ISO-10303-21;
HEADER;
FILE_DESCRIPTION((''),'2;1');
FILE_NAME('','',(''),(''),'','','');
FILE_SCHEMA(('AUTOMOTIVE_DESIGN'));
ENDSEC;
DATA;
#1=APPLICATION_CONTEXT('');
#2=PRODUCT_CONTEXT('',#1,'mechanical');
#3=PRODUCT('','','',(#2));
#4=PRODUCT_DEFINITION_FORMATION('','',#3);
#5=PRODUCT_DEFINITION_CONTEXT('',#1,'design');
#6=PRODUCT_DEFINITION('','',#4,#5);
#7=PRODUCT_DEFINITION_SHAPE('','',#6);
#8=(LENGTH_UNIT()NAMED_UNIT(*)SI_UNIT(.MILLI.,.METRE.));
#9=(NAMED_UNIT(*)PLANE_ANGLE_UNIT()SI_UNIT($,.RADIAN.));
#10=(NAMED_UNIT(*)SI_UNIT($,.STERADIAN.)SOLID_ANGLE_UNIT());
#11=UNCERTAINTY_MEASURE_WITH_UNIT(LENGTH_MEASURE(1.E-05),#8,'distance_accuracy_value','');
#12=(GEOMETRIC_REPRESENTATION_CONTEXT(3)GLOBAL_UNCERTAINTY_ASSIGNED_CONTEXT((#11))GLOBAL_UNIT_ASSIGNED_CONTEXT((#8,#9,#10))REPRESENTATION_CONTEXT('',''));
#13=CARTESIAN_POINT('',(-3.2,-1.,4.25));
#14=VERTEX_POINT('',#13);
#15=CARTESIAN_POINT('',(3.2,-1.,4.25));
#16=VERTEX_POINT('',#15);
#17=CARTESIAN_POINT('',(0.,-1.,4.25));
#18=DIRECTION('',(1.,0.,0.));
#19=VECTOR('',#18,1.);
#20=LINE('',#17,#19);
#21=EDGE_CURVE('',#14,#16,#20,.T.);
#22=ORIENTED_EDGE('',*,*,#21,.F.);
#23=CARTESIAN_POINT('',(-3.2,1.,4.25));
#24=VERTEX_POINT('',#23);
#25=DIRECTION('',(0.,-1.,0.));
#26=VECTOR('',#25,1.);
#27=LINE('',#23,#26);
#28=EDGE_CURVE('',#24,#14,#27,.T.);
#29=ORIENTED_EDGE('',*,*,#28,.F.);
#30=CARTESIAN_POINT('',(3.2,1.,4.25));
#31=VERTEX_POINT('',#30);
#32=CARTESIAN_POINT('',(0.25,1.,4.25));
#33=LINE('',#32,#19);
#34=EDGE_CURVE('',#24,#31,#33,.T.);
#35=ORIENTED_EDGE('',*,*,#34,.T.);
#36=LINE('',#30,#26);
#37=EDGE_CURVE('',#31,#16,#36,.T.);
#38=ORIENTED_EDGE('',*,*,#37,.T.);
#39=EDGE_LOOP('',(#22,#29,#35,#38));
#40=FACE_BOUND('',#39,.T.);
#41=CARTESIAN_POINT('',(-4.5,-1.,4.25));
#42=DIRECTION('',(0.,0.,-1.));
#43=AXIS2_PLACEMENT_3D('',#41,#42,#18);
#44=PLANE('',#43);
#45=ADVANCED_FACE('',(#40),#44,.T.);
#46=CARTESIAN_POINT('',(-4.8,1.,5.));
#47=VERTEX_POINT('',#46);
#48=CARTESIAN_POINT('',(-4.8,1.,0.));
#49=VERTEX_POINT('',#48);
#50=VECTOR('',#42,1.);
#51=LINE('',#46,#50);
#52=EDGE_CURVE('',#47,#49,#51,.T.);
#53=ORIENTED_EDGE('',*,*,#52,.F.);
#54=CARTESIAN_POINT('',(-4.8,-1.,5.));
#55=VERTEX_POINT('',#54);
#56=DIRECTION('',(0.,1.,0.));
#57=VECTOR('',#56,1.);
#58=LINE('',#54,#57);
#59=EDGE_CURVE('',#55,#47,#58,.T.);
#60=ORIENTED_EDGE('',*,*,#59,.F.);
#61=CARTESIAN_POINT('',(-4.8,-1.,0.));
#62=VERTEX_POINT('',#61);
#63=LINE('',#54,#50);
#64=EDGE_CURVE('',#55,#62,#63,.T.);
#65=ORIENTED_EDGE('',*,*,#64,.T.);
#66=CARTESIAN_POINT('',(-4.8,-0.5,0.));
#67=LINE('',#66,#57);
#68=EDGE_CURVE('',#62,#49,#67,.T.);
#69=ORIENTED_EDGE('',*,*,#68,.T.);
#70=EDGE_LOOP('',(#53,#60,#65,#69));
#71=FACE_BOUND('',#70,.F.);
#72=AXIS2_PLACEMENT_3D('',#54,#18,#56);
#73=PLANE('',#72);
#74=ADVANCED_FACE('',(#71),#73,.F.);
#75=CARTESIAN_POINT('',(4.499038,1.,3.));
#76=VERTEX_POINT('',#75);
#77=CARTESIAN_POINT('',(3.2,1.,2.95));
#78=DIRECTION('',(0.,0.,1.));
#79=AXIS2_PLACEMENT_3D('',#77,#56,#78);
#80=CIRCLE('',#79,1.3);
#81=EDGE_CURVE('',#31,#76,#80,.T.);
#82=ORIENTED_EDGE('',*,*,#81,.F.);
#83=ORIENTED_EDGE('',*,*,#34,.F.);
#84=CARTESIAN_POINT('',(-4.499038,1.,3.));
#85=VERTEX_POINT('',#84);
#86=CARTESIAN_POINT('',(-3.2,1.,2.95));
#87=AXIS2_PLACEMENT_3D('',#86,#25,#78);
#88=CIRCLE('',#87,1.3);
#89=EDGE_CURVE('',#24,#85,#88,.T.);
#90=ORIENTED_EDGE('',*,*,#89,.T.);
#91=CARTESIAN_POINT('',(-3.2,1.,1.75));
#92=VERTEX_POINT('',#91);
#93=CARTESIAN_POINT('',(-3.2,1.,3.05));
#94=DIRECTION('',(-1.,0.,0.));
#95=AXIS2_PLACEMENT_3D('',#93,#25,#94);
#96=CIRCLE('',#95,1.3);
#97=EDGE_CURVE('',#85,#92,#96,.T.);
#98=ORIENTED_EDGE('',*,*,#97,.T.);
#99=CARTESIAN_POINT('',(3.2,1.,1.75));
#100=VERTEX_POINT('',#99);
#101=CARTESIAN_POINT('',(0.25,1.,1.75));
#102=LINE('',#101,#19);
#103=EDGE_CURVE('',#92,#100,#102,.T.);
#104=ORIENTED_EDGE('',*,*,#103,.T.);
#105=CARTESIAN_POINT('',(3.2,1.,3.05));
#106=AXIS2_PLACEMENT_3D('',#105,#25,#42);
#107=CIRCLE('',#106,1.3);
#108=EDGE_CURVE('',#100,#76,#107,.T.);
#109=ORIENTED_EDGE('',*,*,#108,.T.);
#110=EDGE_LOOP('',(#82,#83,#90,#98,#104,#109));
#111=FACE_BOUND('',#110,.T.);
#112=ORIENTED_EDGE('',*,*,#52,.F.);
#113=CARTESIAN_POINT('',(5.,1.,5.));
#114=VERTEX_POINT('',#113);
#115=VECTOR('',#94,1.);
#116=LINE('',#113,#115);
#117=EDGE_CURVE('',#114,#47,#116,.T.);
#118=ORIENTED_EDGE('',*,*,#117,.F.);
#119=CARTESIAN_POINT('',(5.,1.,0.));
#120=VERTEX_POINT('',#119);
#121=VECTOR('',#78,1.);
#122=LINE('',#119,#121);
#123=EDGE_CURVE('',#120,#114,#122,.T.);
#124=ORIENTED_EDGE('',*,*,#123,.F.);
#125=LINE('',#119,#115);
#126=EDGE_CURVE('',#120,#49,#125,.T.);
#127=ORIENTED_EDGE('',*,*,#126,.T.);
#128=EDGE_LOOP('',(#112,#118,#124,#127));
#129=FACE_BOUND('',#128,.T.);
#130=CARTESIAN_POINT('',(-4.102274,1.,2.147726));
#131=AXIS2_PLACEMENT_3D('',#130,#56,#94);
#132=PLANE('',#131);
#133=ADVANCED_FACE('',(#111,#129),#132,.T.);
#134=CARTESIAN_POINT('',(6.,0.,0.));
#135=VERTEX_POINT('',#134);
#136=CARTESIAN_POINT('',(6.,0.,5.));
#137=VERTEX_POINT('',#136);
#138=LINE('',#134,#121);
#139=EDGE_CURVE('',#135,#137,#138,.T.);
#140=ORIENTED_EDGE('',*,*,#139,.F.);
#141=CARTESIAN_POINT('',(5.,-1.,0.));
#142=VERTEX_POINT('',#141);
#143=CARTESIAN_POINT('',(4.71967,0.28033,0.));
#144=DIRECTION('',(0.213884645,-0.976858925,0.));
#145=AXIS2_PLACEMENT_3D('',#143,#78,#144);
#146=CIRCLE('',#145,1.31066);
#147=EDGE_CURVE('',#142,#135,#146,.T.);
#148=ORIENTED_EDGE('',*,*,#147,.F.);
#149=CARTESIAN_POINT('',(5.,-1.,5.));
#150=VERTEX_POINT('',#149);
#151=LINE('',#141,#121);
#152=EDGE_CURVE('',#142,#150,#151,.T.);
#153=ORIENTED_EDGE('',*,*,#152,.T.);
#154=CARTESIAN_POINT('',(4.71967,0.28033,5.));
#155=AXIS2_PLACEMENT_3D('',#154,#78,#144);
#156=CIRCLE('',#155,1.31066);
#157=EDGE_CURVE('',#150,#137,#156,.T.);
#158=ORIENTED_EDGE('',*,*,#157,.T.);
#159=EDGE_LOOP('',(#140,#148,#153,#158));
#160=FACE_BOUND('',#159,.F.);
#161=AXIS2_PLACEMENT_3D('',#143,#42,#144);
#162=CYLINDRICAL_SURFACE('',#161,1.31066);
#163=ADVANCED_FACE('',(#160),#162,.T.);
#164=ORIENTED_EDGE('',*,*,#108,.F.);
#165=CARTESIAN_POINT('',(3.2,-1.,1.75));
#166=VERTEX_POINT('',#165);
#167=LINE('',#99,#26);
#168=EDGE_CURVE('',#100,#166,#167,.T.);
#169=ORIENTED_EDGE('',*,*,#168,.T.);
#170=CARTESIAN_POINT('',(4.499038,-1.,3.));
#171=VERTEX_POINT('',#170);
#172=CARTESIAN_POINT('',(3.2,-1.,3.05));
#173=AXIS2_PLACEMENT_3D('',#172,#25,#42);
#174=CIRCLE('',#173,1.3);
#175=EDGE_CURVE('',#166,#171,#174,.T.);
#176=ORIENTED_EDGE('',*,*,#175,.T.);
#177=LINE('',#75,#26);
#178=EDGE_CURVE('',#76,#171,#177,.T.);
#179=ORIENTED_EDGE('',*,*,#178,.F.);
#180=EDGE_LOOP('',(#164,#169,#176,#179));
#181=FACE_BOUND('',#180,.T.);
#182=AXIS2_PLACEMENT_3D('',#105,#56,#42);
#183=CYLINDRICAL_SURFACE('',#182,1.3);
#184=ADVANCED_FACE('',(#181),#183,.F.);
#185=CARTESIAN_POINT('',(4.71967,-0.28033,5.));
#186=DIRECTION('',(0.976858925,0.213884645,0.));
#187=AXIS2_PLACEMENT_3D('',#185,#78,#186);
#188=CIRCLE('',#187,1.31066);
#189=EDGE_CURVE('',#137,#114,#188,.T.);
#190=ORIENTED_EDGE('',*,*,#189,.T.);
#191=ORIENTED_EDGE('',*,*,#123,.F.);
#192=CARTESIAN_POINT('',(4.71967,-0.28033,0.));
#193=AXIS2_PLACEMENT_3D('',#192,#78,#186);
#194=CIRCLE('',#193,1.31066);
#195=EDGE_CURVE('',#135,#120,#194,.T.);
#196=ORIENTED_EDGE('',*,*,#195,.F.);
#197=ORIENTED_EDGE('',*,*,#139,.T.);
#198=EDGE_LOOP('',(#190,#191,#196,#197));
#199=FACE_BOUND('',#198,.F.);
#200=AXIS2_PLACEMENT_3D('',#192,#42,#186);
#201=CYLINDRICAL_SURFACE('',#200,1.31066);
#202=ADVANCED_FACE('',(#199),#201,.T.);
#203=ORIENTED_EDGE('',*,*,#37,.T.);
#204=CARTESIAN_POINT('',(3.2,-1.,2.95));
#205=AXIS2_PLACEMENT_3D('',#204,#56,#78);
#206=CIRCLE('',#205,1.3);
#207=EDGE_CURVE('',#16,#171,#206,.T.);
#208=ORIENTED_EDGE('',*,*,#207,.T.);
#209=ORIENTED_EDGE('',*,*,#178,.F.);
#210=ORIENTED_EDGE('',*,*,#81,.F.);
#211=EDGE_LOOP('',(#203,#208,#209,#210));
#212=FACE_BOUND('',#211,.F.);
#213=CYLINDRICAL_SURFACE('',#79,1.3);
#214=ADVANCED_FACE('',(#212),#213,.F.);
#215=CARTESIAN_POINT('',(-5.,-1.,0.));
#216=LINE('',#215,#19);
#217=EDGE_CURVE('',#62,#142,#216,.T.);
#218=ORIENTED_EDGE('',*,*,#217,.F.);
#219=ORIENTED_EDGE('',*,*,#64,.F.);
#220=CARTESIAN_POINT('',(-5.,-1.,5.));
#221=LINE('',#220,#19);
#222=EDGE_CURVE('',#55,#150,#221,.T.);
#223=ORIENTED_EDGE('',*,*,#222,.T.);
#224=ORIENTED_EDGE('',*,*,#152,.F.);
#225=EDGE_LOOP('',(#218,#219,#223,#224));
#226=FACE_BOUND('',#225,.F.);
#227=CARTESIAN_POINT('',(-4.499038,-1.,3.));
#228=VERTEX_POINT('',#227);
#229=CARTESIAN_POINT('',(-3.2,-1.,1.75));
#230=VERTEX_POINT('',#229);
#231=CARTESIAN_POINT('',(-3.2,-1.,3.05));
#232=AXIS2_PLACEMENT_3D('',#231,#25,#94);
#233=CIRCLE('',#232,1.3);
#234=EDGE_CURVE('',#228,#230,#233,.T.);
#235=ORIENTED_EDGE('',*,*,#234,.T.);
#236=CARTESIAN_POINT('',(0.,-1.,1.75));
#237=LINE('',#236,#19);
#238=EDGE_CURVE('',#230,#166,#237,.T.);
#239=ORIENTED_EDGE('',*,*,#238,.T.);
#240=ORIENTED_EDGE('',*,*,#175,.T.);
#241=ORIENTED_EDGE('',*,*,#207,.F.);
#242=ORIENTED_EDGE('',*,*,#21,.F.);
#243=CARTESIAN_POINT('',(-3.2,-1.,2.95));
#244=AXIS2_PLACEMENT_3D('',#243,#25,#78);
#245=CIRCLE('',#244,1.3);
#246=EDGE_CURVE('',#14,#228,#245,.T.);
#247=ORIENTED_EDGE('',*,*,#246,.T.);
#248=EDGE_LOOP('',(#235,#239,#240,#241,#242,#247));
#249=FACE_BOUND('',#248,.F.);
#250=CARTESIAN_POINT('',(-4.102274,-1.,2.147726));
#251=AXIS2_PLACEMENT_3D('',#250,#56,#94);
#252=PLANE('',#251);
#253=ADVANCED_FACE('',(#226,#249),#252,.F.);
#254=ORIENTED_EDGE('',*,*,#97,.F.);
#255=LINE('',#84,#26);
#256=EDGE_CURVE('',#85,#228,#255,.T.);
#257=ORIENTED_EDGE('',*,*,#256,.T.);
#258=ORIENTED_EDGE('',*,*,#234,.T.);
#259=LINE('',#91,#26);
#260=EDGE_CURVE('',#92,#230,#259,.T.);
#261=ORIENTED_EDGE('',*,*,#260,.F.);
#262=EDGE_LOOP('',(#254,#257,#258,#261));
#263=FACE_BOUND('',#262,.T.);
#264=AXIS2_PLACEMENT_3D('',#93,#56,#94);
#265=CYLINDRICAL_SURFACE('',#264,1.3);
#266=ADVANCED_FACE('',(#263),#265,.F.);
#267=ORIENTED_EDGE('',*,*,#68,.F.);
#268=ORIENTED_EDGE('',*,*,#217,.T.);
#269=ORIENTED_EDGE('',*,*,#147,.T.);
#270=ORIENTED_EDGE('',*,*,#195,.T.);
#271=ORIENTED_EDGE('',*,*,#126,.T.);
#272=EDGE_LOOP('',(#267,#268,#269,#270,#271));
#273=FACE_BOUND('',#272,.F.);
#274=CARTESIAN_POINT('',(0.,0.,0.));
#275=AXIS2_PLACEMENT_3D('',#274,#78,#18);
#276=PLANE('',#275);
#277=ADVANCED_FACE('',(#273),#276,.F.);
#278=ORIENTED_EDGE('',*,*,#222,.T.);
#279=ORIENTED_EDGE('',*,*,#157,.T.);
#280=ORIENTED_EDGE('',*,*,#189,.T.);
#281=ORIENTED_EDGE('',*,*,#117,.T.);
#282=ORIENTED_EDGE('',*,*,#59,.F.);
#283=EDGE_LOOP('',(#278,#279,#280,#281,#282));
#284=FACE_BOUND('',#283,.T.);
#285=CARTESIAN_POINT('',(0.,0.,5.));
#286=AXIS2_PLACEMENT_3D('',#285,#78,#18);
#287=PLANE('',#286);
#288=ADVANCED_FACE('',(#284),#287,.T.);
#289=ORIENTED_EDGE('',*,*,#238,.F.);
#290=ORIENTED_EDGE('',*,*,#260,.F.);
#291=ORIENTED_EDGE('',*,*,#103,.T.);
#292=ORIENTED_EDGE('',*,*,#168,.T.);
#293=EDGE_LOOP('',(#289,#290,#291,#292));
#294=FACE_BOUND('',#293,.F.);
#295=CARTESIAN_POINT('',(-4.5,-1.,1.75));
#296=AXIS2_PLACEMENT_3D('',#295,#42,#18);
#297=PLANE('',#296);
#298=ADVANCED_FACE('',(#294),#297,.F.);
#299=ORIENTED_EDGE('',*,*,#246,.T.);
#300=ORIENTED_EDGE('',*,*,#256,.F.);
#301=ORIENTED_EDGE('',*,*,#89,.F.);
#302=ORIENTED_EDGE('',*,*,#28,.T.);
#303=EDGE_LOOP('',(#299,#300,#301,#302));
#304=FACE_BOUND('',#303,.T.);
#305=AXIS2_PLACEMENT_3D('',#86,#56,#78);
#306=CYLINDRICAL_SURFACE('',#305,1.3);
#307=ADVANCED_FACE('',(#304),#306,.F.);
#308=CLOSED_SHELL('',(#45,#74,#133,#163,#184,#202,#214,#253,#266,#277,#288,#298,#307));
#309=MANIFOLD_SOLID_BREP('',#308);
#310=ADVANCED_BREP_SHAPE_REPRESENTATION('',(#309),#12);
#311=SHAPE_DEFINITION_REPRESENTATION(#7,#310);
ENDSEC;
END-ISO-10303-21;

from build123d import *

# Parameters (mm, degrees)
F1_DEPTH    = 5
F2_W        = 9
F2_H        = 2.5
F3_DEPTH    = 2.001
F4_T1_DEPTH = 2
F6_DEPTH    = 5.001


# Not quite as in the source:
# - a fillet or chamfer that OpenCascade refuses, or shapes differently, is made with other operations: its cross-section is extruded or revolved along the edge and cut away or added


with BuildPart() as f1:
    # F0 (on Top) → F1 (new body)
    with BuildSketch(Plane.XY):
        with BuildLine():
            Line((5, 1), (-5, 1))
            ThreePointArc((-5, 1), (-5.6464466094, 0.6464466094), (-6, 0))
            ThreePointArc((-6, 0), (-5.6464466094, -0.6464466094), (-5, -1))
            Line((-5, -1), (5, -1))
            ThreePointArc((5, -1), (5.6464466094, -0.6464466094), (6, 0))
            ThreePointArc((6, 0), (5.6464466094, 0.6464466094), (5, 1))
        make_face()
    extrude(amount=F1_DEPTH)

    # F2 (on face) → F3 (cut, through all)
    with BuildSketch(Plane.XZ.offset(1)):
        with Locations((0, 3)):
            Rectangle(F2_W, F2_H)
    extrude(amount=-F3_DEPTH, mode=Mode.SUBTRACT)

    # F4: fillet of radius 1.3 on 4 edges, made by hand

    # F4_s2 → F4_t1 (join)
    with BuildSketch(Plane.XZ.offset(-1)):
        with BuildLine():
            ThreePointArc((-4.5, 3.05), (-4.1192388155, 2.1307611845), (-3.2, 1.75))
            Line((-3.2, 1.75), (-4.5, 1.75))
            Line((-4.5, 1.75), (-4.5, 3.05))
        make_face()
        with BuildLine():
            ThreePointArc((-3.2, 4.25), (-4.1192388155, 3.8692388155), (-4.5, 2.95))
            Line((-4.5, 2.95), (-4.5, 4.25))
            Line((-4.5, 4.25), (-3.2, 4.25))
        make_face()
        with BuildLine():
            ThreePointArc((3.2, 4.25), (4.1192388155, 3.8692388155), (4.5, 2.95))
            Line((4.5, 2.95), (4.5, 4.25))
            Line((4.5, 4.25), (3.2, 4.25))
        make_face()
        with BuildLine():
            ThreePointArc((3.2, 1.75), (4.1192388155, 2.1307611845), (4.5, 3.05))
            Line((4.5, 3.05), (4.5, 1.75))
            Line((4.5, 1.75), (3.2, 1.75))
        make_face()
    extrude(amount=F4_T1_DEPTH)

    # F5 (on face) → F6 (cut, through all)
    with BuildSketch(Plane.XY.offset(5)):
        with BuildLine():
            Line((-4.8, -1), (-4.8, 1))
            Line((-4.8, 1), (-5, 1))
            ThreePointArc((-5, 1), (-5.6464466094, 0.6464466094), (-6, 0))
            ThreePointArc((-6, 0), (-5.6464466094, -0.6464466094), (-5, -1))
            Line((-5, -1), (-4.8, -1))
        make_face()
    extrude(amount=-F6_DEPTH, mode=Mode.SUBTRACT)


solid = f1.part
